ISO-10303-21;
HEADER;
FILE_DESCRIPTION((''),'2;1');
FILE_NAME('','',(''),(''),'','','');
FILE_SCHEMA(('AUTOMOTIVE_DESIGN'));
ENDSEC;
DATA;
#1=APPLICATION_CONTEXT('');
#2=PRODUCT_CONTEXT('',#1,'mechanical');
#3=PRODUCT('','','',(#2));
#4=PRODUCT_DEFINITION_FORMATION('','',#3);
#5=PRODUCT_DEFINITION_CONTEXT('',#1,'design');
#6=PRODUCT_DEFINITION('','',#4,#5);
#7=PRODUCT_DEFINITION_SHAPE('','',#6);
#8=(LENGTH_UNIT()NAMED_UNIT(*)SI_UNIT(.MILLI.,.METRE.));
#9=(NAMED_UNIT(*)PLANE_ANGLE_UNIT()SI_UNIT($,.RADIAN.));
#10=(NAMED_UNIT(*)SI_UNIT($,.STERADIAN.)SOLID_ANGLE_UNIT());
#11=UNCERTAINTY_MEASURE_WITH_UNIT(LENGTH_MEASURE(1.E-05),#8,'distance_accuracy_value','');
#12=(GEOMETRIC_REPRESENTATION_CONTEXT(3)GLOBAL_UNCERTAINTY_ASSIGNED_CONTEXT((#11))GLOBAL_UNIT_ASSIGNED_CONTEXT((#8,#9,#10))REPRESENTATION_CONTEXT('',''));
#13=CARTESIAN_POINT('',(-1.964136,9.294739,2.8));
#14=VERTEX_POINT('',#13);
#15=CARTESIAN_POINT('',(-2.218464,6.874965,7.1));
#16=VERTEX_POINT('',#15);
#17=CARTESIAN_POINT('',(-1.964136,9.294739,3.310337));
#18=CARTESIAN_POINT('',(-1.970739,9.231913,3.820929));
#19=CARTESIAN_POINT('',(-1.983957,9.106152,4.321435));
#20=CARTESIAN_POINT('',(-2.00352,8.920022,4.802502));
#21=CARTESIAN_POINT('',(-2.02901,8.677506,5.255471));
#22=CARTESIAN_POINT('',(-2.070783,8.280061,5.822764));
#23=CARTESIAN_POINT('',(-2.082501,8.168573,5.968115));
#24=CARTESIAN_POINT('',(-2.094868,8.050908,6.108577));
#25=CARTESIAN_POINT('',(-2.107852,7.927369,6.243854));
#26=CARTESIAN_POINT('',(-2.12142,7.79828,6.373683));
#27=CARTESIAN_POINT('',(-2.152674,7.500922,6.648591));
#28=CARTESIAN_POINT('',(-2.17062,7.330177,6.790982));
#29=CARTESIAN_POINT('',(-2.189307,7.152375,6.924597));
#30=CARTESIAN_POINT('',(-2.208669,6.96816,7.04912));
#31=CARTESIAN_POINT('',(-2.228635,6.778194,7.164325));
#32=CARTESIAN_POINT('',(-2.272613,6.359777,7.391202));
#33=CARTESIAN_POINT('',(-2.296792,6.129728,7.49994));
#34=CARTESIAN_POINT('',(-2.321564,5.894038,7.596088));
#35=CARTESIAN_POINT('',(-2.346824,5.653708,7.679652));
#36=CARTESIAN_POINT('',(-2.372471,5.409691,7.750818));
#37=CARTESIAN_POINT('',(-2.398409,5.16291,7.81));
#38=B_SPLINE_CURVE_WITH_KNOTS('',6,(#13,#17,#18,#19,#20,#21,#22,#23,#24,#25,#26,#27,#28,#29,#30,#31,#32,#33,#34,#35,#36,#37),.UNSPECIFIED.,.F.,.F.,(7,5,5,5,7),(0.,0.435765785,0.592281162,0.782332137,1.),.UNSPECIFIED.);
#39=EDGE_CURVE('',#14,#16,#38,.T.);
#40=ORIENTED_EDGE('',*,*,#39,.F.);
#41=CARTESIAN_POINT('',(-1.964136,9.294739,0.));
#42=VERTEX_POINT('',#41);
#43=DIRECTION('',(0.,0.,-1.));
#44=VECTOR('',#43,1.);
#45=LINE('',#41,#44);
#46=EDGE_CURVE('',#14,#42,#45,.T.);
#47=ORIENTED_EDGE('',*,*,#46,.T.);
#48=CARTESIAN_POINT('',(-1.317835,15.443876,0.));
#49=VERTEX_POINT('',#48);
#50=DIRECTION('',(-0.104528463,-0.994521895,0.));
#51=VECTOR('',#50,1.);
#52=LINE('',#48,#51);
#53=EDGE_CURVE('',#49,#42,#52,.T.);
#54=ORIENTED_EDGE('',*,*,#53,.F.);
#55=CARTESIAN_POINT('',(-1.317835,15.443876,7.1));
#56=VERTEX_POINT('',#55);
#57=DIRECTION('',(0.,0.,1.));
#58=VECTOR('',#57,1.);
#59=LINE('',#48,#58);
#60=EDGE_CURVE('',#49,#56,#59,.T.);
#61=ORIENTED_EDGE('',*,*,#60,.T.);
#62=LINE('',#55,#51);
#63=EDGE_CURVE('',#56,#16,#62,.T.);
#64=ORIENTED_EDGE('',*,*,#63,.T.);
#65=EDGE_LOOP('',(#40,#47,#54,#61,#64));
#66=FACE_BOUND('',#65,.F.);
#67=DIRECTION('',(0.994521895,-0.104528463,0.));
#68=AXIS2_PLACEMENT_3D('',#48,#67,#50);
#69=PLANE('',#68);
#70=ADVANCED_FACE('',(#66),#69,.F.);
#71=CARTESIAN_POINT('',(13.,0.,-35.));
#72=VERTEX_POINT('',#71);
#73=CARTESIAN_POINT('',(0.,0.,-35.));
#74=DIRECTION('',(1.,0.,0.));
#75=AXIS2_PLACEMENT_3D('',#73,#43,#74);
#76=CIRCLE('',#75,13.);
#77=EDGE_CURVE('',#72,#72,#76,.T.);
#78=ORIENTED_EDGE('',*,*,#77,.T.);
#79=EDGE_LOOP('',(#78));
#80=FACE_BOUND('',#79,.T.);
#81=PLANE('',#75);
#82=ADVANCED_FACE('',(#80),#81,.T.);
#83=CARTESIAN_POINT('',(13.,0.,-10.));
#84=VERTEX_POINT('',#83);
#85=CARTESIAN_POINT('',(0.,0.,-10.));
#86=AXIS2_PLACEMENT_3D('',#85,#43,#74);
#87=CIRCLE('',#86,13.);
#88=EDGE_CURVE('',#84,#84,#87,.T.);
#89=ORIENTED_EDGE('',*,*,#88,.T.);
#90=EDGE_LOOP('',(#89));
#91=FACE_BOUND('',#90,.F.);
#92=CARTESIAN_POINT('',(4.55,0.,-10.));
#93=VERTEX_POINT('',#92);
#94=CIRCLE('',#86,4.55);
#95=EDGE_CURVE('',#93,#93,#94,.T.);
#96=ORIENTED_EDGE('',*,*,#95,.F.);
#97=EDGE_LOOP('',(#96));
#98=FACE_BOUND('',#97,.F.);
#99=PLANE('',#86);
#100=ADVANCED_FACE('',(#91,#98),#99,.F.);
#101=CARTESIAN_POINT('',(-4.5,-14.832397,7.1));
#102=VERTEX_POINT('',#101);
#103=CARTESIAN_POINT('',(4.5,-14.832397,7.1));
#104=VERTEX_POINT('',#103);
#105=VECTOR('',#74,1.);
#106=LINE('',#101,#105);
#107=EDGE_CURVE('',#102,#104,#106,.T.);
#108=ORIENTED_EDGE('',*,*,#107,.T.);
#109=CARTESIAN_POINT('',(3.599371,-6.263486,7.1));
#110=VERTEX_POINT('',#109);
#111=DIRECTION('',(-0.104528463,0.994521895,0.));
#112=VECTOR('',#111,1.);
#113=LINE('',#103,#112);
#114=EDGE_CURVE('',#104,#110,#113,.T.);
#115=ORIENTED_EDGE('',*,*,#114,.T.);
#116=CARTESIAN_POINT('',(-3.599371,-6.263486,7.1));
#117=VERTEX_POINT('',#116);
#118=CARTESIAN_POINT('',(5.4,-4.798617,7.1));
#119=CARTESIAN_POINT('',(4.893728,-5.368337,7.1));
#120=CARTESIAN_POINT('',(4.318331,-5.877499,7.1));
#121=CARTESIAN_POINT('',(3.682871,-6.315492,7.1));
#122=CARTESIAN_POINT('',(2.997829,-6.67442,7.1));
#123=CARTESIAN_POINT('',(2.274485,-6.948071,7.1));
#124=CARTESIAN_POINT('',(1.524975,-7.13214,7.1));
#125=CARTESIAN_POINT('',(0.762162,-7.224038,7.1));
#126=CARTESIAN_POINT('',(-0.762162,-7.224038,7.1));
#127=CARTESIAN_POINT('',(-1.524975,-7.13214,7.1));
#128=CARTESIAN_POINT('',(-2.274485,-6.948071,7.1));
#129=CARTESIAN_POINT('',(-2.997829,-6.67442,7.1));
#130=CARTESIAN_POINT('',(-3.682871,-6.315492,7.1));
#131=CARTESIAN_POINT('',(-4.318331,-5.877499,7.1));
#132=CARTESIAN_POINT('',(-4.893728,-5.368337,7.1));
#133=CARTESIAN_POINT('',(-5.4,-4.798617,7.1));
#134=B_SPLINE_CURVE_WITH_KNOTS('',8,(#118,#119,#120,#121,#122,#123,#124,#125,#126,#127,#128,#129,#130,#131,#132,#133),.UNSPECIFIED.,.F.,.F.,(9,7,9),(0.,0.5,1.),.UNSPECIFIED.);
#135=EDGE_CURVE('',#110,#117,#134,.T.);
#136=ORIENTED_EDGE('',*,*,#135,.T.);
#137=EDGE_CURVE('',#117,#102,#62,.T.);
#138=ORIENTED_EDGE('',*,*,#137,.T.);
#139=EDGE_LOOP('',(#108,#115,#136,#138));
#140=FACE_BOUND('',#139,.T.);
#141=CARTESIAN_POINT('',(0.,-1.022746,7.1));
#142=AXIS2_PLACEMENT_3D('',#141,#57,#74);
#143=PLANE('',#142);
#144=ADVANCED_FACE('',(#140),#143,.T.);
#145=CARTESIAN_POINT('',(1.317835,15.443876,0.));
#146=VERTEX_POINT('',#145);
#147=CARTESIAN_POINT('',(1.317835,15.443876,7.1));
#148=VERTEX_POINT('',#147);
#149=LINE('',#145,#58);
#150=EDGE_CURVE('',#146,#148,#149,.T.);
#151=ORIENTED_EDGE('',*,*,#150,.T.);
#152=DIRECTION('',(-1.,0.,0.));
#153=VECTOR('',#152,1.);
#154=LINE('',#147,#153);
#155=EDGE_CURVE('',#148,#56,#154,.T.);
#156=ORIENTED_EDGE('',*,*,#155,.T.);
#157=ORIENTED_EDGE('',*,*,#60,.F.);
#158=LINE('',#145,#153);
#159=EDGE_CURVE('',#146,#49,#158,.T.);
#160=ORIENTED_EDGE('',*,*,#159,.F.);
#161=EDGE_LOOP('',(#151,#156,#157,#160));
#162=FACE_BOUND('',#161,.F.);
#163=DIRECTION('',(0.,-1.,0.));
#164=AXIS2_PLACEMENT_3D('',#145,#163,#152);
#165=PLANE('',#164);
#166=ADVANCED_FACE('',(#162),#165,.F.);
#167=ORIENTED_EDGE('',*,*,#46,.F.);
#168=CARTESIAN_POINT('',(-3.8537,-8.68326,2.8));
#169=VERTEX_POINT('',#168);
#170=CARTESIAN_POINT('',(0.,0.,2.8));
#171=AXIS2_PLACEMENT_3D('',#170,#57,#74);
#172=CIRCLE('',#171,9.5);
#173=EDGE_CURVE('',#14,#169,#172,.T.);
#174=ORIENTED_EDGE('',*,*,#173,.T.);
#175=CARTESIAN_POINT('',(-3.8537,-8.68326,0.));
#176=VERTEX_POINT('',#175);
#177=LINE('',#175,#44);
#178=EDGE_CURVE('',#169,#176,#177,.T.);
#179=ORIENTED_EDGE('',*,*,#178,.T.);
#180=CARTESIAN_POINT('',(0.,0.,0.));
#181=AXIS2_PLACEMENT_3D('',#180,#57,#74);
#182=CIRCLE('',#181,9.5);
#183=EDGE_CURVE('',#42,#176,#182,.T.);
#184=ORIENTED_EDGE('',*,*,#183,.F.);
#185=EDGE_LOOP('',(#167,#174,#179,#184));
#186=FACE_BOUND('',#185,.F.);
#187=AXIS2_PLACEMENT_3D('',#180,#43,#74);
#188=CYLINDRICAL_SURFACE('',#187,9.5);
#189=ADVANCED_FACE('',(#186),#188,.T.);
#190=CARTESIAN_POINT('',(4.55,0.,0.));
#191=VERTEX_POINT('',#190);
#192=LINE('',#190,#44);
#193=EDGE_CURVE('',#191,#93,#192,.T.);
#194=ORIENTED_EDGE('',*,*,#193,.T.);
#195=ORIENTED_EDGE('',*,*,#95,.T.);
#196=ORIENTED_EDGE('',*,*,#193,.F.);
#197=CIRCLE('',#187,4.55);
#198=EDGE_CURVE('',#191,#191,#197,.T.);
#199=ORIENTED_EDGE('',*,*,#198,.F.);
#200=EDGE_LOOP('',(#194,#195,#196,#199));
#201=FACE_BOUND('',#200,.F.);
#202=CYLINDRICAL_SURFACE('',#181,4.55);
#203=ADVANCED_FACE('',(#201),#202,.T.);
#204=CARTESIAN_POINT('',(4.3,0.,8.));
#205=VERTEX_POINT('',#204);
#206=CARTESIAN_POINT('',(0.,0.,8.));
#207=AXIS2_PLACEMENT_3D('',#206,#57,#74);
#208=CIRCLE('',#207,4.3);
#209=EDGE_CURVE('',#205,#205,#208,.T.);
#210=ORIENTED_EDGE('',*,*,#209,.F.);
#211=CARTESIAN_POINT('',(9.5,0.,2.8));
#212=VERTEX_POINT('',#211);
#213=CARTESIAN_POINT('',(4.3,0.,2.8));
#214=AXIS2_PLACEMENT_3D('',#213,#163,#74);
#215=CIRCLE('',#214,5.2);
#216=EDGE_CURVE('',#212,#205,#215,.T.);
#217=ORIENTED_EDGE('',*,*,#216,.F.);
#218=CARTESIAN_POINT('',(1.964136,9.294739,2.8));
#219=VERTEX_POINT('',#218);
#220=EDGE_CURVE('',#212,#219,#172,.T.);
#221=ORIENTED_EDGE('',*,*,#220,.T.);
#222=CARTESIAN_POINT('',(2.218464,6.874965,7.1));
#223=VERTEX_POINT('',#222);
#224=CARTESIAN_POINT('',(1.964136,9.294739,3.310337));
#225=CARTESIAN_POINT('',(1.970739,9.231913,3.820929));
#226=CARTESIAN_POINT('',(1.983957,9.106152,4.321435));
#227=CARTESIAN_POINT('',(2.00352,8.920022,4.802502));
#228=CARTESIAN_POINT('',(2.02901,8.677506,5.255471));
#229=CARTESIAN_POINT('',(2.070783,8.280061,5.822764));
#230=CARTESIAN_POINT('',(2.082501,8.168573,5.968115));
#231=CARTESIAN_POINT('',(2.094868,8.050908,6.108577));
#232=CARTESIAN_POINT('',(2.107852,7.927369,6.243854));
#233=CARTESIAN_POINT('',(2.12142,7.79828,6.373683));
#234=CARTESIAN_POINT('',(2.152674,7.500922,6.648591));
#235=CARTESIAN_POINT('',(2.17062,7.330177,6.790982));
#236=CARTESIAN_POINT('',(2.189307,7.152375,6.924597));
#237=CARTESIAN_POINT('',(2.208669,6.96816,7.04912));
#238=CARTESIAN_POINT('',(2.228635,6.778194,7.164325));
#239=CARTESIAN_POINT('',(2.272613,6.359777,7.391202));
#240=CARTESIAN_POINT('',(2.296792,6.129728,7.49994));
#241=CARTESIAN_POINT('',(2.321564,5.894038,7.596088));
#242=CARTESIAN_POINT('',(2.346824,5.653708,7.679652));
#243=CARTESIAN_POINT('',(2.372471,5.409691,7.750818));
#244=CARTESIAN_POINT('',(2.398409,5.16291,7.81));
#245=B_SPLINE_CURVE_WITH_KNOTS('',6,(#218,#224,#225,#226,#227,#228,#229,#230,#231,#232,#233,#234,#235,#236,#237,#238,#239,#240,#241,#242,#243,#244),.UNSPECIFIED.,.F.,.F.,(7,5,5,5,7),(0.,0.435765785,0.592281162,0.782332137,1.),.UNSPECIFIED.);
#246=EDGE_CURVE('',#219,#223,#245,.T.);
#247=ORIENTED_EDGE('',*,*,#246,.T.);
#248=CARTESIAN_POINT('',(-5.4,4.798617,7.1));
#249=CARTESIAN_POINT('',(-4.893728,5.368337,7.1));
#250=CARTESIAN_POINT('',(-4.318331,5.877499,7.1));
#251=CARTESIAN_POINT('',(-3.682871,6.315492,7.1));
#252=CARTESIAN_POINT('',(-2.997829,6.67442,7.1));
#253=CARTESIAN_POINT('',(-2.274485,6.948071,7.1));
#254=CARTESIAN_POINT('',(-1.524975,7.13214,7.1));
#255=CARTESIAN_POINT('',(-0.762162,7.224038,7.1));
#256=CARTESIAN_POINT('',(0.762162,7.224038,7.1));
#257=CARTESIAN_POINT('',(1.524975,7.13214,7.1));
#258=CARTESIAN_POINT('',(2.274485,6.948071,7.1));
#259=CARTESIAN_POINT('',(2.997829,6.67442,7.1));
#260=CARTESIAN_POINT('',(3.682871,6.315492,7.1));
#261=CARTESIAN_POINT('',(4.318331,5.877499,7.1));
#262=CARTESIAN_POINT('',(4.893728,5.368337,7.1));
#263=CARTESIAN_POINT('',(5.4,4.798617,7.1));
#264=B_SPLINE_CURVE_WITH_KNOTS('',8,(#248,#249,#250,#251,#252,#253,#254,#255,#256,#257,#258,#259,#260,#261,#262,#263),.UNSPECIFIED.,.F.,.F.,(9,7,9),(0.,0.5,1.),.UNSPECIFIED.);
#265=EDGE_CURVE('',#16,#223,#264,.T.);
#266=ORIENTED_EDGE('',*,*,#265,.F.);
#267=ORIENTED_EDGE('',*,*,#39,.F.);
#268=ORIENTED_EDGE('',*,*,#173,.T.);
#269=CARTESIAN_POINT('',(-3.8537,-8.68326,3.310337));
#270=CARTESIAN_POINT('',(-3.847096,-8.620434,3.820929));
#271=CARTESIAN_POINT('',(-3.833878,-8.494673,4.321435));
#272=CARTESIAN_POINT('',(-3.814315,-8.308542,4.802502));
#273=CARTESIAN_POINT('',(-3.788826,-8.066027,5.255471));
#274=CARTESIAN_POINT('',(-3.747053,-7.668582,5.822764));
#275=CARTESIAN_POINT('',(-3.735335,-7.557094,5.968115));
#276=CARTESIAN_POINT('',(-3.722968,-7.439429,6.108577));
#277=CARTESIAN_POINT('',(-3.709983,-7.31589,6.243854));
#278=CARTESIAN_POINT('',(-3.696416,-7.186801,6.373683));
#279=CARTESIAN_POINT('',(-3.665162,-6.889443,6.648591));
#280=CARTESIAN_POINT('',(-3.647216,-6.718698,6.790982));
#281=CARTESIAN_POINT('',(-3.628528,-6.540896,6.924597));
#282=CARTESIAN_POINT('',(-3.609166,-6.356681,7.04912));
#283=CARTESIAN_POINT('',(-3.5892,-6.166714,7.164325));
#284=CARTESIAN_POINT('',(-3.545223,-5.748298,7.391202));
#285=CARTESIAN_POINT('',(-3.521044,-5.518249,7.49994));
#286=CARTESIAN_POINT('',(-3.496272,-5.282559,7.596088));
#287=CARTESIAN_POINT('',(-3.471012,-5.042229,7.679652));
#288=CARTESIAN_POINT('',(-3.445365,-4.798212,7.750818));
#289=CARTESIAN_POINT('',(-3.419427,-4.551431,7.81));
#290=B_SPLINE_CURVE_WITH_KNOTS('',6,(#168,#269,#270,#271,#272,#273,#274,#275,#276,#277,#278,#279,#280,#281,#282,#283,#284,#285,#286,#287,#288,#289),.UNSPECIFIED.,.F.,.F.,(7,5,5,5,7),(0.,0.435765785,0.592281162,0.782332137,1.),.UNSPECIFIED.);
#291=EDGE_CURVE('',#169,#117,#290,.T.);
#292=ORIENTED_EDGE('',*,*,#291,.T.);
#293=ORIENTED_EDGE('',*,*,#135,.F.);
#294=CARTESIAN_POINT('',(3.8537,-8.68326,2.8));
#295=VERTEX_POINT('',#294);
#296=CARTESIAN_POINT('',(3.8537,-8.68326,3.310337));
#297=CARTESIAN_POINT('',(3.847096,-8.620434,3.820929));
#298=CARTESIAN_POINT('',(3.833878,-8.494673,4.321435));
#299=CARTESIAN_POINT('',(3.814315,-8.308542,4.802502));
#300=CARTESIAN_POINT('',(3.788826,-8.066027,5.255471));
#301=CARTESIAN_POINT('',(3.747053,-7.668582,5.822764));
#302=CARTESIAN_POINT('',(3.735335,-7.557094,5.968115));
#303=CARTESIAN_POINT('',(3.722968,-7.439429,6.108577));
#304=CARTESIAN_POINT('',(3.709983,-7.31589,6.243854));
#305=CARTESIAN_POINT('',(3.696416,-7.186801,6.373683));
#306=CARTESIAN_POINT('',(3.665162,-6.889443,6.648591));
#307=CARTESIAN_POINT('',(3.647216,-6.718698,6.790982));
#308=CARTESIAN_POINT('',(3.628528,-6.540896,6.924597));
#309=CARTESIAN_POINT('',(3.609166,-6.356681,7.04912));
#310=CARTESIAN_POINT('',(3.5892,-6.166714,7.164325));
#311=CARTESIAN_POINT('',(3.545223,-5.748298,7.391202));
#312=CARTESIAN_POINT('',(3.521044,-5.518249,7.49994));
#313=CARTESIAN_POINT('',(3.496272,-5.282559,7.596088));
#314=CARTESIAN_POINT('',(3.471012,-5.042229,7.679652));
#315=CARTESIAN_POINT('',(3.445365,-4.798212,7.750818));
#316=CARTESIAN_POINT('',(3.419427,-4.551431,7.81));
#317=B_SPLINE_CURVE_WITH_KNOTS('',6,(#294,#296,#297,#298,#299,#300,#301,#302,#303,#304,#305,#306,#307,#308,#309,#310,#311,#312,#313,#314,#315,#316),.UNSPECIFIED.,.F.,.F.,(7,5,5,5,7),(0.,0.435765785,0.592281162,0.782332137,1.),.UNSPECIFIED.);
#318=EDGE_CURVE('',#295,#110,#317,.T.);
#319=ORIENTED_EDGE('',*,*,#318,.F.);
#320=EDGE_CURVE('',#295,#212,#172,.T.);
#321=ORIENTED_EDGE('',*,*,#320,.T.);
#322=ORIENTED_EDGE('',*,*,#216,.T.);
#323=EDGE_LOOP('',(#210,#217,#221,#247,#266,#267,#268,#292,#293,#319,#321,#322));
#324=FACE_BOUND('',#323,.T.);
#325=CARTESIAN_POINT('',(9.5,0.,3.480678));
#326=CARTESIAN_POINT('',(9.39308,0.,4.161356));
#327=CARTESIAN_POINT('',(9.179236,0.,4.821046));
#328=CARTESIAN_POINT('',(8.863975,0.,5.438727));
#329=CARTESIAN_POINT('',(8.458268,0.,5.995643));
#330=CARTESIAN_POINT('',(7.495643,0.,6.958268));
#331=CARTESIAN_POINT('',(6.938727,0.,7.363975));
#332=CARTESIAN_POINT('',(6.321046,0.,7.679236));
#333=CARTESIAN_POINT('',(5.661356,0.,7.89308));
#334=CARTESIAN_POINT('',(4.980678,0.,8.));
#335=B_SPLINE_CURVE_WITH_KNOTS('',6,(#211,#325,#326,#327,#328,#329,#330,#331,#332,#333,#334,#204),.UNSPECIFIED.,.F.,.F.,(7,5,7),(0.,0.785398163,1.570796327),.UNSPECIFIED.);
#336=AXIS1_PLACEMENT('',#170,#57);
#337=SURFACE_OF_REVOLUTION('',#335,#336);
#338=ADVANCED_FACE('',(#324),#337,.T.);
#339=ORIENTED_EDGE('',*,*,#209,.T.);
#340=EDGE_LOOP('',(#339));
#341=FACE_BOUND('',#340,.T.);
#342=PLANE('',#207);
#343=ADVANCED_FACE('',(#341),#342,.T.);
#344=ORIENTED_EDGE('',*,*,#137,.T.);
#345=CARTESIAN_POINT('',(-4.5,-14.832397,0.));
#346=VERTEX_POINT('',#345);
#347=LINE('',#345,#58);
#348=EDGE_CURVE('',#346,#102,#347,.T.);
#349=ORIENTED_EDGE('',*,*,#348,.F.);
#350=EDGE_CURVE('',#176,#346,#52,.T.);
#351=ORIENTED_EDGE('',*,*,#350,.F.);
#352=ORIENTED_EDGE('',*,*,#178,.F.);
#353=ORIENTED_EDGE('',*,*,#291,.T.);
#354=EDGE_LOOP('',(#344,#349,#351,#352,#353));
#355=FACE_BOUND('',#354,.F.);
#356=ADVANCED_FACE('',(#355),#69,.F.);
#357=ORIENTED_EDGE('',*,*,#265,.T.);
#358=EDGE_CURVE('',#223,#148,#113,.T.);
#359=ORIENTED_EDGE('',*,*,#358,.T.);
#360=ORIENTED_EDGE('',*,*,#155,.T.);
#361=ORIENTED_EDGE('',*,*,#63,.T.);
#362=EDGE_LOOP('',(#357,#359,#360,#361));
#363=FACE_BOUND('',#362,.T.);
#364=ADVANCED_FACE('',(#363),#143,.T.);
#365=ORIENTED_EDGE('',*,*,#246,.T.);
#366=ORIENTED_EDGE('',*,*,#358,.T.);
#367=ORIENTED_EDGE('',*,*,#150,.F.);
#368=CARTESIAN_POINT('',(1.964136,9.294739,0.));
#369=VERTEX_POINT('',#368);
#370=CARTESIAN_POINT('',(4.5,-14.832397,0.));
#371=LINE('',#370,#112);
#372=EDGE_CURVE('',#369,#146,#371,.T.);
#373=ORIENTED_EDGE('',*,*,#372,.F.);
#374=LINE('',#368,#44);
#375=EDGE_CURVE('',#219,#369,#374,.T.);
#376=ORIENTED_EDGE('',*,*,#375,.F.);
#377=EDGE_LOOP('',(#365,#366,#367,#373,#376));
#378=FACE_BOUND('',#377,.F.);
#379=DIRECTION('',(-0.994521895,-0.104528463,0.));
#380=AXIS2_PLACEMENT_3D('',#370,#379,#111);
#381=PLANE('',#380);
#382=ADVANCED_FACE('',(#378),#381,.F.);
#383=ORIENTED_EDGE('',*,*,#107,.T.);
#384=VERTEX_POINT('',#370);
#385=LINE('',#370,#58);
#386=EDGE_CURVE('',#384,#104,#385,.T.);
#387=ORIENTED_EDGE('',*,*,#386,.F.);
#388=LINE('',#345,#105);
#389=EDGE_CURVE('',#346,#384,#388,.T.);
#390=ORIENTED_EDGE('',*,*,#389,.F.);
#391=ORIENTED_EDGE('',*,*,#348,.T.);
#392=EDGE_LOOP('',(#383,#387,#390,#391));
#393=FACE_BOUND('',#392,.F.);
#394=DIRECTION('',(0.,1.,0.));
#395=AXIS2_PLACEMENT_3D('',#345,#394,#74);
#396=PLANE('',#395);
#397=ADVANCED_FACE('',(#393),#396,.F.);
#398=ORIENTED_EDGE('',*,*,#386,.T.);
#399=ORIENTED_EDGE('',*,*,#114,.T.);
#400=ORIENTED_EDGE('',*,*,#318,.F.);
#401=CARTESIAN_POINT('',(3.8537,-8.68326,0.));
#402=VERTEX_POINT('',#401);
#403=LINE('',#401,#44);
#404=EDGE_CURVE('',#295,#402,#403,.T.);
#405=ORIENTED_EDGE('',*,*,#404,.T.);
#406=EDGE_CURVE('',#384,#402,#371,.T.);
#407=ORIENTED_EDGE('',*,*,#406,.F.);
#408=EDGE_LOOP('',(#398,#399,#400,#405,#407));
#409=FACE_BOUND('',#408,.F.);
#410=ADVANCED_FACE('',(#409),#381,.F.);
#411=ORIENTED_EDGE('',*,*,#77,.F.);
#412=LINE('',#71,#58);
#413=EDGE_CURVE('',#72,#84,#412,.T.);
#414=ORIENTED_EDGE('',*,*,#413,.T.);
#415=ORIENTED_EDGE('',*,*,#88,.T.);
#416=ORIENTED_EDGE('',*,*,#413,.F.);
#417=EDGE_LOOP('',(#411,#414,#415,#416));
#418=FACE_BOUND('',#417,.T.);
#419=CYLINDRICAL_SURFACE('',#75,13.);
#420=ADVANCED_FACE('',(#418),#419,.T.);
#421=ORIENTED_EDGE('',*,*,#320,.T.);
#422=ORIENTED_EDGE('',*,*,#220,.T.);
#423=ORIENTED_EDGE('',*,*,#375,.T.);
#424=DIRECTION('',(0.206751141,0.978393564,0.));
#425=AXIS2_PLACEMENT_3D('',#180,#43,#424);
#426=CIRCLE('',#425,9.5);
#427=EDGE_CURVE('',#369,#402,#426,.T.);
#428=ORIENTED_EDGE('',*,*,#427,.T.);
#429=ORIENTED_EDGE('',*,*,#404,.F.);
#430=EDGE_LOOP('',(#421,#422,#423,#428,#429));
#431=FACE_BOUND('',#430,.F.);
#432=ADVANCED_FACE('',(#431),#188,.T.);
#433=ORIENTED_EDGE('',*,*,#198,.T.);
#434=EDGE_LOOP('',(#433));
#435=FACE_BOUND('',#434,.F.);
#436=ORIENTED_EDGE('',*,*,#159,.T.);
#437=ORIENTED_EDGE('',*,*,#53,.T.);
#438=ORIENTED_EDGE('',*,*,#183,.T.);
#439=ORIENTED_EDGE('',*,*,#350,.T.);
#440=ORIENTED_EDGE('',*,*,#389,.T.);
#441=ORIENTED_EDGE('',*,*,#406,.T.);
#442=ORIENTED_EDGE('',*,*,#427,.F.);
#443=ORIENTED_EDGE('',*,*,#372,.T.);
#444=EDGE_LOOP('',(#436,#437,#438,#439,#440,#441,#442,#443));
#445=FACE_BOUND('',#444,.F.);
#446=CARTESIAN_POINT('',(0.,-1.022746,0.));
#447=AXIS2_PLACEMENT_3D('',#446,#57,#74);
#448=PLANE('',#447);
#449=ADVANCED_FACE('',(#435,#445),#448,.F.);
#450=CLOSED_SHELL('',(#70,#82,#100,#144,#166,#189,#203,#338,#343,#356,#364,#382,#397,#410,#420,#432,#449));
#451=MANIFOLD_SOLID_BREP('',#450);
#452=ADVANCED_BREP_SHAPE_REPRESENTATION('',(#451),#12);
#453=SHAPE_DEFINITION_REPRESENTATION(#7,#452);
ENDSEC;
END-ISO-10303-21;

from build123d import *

# Parameters (mm, degrees)
F0_R     = 9.5
F1_DEPTH = 8
F2_R     = 5.2
F4_DEPTH = 7.1
F5_R     = 4.55
F6_DEPTH = 35
F7_R     = 13
F7_R_2   = 4.55
F8_DEPTH = 25


with BuildPart() as f1:
    # F0 (on Top) → F1 (new body)
    with BuildSketch(Plane.XY):
        Circle(F0_R)
    extrude(amount=F1_DEPTH)

    # F2
    f2_edges = [f1.edges().sort_by_distance(p)[0] for p in [
        (-9.5, 0, 8),
    ]]
    fillet(f2_edges, radius=F2_R)

    # F3 (on Top) → F4 (join)
    with BuildSketch(Plane.XY):
        Polygon((4.5, -14.8323969742), (1.3178354695, 15.4438761221), (-1.3178354695, 15.4438761221), (-4.5, -14.8323969742), align=None)
    extrude(amount=F4_DEPTH)

    # F5 (on face) → F6 (join)
    with BuildSketch(Plane(origin=(0, 0, 0), x_dir=(1, 0, 0), z_dir=(0, 0, -1))):
        Circle(F5_R)
    extrude(amount=F6_DEPTH)

    # F7 (on face) → F8 (join)
    with BuildSketch(Plane(origin=(0, 0, -35), x_dir=(1, 0, 0), z_dir=(0, 0, -1))):
        Circle(F7_R)
        Circle(F7_R_2, mode=Mode.SUBTRACT)
    extrude(amount=-F8_DEPTH)


solid = f1.part
